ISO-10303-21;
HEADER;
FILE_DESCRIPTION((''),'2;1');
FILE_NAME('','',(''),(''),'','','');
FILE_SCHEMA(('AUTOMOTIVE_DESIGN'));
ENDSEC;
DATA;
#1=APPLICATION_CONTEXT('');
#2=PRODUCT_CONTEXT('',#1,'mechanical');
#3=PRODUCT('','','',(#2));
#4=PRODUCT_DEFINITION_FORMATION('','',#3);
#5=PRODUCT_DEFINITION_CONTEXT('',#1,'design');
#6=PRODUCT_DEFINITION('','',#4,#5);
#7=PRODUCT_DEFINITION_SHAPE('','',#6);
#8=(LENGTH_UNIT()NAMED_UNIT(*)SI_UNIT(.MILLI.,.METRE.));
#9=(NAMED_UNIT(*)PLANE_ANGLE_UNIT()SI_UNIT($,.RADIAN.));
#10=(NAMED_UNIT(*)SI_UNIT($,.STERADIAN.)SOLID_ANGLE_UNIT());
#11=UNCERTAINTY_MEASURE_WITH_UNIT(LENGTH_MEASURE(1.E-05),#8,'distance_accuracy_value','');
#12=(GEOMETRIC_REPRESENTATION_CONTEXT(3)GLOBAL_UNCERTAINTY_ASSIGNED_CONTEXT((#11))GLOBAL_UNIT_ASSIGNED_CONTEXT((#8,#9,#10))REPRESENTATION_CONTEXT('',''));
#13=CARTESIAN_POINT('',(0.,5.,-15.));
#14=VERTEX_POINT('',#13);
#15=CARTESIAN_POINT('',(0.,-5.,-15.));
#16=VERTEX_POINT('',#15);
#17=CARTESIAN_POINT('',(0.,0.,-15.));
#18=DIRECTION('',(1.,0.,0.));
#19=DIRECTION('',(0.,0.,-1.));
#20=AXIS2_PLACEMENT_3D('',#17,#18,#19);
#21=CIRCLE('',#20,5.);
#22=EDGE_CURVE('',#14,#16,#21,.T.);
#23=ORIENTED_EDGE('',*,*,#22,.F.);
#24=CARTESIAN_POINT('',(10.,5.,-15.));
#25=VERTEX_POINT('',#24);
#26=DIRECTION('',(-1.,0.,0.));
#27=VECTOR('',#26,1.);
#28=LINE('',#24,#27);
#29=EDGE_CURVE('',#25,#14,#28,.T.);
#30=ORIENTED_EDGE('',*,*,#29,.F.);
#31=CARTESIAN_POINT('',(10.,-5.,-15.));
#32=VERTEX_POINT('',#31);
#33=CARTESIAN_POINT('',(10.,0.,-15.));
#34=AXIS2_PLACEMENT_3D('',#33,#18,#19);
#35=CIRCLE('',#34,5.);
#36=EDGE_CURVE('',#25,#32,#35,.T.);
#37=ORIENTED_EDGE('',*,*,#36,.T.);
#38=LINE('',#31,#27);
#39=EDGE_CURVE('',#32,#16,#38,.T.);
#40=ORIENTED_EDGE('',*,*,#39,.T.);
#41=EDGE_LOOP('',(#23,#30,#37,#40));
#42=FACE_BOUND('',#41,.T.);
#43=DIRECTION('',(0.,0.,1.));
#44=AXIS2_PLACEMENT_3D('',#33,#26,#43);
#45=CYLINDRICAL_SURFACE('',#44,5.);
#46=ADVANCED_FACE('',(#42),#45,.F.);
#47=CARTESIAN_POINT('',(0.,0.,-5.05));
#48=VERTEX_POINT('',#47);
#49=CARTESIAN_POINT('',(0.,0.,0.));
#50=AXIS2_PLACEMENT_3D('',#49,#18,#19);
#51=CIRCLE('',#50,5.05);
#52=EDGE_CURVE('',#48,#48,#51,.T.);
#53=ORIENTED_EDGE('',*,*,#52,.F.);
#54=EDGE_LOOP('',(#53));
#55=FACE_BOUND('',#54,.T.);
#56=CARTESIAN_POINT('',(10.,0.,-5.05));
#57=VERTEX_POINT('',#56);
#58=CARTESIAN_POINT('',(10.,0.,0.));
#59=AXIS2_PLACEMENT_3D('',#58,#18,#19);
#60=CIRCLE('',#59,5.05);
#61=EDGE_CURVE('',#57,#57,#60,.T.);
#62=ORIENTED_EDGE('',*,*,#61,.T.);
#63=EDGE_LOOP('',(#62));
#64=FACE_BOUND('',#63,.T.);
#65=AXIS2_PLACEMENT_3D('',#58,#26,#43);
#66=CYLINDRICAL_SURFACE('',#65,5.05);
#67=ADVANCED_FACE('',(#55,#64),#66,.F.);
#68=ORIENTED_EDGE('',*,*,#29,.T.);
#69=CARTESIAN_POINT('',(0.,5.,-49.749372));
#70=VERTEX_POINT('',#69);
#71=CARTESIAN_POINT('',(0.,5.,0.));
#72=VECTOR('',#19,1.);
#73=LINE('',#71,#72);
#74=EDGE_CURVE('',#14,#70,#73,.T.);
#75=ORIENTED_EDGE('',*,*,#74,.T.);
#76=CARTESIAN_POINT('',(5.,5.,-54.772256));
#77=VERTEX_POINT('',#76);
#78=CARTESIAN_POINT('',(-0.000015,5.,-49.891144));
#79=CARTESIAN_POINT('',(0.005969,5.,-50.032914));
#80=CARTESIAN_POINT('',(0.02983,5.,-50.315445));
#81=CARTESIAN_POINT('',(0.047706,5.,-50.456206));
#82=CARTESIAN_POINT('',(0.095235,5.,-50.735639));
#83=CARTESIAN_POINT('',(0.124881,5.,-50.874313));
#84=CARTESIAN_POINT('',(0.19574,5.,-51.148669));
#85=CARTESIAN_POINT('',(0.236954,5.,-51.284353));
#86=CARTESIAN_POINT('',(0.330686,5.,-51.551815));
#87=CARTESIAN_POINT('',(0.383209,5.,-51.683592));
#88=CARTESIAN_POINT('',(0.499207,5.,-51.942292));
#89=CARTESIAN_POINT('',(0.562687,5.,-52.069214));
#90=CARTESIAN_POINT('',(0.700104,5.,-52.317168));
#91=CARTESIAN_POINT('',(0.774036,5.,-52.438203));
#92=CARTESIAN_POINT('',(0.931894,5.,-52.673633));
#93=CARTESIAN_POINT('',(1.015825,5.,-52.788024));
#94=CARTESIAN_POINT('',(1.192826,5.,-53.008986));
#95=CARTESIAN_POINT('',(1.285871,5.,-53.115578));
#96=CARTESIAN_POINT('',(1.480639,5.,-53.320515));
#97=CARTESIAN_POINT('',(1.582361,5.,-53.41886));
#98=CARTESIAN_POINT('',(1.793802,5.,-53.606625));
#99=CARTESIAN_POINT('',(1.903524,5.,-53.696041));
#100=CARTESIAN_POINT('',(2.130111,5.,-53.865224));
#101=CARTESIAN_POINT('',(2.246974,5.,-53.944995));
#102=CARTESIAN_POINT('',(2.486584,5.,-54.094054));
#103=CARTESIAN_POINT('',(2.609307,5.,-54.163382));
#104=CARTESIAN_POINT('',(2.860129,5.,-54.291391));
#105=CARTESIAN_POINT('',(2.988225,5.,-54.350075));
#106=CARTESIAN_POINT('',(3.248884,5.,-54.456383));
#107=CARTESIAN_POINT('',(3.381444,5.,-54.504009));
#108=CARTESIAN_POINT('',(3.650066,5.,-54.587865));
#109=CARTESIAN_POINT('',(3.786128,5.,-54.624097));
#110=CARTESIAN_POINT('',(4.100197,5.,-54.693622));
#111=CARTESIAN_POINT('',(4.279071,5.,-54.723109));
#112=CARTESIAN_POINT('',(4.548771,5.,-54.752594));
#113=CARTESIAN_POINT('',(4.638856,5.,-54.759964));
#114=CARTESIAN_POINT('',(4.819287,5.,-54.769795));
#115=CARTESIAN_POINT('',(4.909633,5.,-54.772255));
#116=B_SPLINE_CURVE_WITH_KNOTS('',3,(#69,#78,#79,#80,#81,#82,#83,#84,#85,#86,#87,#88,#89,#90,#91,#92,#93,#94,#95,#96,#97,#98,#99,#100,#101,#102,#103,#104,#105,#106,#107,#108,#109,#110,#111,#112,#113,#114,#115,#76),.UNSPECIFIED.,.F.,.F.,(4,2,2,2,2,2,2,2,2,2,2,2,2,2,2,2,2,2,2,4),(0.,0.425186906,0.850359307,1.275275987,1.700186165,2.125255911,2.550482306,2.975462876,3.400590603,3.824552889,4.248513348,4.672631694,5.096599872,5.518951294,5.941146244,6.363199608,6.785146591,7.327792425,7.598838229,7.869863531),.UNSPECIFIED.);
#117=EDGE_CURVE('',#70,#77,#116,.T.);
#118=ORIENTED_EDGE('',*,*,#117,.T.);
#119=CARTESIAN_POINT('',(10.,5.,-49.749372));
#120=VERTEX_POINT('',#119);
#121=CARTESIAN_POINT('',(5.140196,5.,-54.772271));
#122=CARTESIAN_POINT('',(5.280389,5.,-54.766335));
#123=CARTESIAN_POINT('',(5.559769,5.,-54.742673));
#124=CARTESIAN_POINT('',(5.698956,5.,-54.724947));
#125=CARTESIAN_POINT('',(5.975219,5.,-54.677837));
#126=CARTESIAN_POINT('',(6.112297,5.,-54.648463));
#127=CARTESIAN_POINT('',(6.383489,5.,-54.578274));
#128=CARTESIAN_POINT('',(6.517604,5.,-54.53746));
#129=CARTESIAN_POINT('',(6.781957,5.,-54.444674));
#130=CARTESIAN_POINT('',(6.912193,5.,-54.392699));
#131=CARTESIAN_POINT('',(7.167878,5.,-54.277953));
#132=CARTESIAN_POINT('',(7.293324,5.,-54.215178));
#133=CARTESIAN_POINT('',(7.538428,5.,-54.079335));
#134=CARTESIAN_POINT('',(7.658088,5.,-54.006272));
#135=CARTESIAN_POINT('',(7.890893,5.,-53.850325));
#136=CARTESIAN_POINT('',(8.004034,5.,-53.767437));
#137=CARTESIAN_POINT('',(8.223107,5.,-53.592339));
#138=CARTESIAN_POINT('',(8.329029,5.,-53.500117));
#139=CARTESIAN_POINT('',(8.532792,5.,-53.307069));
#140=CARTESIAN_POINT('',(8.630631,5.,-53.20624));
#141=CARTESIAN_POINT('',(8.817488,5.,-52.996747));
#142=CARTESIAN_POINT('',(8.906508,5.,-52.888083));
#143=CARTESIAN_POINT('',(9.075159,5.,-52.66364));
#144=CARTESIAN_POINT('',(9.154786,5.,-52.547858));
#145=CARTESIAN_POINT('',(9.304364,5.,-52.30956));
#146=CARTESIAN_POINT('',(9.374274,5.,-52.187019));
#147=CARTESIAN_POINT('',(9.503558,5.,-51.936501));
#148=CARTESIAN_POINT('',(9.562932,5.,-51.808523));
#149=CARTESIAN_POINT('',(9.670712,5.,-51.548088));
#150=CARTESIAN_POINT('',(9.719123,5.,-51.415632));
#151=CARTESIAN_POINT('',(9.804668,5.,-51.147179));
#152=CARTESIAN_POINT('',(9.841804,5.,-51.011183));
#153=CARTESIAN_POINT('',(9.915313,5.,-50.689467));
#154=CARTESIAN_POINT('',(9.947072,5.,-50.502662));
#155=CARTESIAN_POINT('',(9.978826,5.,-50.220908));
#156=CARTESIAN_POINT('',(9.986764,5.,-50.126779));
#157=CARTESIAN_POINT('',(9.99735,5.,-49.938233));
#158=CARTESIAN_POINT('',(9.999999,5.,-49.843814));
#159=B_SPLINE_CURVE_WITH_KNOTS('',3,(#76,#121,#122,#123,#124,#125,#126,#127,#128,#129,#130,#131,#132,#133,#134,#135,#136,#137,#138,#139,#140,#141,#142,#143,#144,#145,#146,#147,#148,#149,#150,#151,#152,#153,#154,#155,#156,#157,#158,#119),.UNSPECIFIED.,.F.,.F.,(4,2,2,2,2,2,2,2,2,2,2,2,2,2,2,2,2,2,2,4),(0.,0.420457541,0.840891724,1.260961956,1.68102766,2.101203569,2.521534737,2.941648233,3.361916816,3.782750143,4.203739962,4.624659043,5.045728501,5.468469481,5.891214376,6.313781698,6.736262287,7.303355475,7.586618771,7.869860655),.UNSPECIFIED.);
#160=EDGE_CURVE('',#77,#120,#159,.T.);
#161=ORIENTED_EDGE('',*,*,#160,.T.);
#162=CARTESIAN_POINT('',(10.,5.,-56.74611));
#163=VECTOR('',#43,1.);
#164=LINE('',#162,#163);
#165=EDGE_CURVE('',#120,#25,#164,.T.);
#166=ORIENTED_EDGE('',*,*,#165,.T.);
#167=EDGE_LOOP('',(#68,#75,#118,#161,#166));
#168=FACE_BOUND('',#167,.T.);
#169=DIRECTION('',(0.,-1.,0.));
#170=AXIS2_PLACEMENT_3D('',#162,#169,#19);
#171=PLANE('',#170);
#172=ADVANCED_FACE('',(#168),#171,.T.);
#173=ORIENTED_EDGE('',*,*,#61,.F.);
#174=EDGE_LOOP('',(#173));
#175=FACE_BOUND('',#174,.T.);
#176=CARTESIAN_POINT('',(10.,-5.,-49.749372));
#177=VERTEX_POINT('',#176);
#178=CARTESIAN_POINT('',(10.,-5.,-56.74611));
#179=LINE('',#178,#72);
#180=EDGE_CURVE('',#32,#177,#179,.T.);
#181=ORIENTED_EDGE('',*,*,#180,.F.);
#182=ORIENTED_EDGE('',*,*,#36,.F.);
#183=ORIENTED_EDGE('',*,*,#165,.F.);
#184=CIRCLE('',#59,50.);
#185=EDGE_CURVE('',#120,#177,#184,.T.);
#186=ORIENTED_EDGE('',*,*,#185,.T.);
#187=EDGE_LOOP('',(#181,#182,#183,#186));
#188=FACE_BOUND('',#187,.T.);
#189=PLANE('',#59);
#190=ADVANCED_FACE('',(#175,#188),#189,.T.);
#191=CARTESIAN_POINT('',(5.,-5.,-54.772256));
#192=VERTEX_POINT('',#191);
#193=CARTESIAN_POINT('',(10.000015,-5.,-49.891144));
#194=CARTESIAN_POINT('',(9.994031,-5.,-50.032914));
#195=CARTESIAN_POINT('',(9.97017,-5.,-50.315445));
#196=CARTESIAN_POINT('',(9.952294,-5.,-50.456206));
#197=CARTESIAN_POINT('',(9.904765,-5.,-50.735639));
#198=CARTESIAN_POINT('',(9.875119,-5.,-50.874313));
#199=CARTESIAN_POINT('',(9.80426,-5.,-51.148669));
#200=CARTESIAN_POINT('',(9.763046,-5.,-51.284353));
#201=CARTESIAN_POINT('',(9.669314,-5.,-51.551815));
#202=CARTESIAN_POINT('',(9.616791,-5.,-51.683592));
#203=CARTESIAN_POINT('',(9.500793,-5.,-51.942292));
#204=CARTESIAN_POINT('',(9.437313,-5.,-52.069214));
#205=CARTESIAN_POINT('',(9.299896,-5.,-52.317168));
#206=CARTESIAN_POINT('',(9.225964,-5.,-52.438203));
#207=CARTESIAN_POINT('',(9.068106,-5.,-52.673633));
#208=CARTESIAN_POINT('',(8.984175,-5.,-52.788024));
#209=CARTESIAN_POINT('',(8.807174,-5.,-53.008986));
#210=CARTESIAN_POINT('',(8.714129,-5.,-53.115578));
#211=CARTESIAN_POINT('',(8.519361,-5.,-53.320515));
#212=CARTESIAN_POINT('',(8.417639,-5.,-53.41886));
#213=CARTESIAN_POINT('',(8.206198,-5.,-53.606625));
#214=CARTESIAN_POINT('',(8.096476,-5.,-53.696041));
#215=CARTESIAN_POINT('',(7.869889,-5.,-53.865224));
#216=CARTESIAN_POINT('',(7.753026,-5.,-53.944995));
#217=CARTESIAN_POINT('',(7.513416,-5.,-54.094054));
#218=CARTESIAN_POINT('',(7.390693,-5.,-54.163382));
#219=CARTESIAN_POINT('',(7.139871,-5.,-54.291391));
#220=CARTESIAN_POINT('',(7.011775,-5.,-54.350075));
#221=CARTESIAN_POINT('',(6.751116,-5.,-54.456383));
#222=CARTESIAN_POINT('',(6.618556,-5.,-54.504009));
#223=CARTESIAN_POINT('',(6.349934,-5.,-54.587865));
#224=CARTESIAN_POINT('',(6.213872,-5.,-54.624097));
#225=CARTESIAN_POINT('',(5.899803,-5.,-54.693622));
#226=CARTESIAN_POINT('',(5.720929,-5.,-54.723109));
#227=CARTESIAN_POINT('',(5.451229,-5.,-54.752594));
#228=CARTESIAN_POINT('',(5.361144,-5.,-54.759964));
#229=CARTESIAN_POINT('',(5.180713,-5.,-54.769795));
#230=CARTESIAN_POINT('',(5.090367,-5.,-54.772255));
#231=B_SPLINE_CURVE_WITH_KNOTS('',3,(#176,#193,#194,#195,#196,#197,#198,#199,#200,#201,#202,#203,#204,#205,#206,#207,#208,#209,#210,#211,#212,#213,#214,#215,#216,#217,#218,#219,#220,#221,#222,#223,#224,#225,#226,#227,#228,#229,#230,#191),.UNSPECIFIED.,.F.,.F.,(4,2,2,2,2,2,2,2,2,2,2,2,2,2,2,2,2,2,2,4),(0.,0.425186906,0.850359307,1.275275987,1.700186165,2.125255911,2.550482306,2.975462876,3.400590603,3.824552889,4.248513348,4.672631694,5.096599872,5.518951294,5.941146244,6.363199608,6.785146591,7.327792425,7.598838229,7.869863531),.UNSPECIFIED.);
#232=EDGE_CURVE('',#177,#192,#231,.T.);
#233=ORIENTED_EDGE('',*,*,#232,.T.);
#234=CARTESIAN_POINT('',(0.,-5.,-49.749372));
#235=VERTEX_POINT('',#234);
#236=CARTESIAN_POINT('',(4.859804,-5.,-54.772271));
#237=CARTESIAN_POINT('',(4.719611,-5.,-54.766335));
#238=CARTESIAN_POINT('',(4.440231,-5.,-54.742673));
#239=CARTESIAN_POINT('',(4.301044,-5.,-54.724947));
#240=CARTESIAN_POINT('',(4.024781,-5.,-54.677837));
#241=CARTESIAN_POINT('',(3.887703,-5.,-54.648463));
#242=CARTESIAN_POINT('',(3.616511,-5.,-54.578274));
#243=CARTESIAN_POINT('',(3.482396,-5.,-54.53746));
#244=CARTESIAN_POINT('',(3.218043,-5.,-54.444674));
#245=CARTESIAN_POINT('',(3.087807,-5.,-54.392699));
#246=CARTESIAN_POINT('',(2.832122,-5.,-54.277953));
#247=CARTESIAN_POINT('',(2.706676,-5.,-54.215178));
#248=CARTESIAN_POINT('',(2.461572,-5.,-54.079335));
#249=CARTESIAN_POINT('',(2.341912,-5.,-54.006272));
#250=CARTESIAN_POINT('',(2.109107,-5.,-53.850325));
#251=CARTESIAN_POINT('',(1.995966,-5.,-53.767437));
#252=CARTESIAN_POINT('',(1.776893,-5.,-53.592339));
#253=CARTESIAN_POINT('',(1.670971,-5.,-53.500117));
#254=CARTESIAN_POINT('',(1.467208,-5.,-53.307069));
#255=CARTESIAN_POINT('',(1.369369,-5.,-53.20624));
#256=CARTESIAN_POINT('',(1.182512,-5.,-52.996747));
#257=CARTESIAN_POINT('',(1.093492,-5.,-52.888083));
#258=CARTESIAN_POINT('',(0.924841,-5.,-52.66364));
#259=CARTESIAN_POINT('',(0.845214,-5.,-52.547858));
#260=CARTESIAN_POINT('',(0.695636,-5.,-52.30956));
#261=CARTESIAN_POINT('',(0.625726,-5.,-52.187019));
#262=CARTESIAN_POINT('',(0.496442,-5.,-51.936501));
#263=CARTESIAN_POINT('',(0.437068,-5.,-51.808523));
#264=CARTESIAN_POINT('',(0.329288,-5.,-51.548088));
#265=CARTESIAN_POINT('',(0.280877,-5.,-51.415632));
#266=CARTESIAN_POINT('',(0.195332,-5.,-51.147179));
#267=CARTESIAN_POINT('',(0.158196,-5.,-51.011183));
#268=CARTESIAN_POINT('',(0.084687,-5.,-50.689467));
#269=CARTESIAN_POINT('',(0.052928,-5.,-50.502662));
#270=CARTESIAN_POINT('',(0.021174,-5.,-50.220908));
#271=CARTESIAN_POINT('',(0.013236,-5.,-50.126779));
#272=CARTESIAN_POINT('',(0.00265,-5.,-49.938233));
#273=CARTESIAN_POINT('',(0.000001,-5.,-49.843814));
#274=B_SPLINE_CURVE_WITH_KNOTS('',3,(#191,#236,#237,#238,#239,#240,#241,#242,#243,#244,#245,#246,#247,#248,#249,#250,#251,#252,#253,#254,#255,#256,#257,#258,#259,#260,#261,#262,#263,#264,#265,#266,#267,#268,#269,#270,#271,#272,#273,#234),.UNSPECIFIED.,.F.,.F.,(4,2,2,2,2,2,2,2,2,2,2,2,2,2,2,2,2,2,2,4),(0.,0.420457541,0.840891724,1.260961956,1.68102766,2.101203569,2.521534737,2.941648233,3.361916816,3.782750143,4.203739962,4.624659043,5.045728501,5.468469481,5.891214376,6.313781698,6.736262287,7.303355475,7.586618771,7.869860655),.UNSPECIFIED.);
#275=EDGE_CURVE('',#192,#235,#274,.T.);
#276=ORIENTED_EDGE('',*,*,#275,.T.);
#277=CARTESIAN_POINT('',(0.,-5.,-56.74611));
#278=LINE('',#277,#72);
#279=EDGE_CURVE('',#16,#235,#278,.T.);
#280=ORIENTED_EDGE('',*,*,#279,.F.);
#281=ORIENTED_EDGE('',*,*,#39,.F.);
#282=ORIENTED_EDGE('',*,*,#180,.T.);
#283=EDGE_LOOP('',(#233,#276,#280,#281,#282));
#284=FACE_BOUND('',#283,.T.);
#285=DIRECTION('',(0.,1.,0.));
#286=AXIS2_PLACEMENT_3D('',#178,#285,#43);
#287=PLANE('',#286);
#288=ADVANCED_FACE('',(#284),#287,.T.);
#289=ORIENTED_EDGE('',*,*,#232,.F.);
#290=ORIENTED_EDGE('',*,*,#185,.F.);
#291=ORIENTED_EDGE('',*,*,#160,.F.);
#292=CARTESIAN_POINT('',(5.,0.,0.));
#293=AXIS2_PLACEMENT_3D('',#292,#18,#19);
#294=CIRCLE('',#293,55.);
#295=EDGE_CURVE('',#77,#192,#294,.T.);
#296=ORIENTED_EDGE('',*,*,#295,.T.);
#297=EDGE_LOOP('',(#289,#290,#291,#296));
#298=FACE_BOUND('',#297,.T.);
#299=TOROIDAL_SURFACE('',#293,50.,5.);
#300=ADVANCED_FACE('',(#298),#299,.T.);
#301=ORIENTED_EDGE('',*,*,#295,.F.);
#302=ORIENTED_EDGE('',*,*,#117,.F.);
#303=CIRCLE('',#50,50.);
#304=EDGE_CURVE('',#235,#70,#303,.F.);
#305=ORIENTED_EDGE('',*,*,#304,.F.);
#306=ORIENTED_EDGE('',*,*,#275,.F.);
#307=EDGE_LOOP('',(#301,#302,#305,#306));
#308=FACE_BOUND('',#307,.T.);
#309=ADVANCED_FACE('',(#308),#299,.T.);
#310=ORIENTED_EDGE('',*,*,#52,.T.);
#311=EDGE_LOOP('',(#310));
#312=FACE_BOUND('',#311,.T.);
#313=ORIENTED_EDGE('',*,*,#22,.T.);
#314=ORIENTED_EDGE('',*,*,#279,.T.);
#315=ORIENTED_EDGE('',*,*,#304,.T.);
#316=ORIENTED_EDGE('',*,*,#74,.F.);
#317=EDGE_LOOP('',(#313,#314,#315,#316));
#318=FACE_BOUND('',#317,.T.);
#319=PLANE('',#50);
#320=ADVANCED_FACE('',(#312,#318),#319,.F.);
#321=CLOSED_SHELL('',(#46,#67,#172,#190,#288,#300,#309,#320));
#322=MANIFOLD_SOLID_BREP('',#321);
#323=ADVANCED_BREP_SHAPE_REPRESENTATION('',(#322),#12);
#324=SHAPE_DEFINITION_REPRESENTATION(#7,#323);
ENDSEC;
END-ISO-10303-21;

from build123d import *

# Parameters (mm, degrees)
SKETCH1_R           = 110
BOSS_EXTRUDE1_DEPTH = 20
CUT_EXTRUDE2_DEPTH  = 20
SKETCH2_R           = 10.1
CUT_EXTRUDE3_DEPTH  = 20
FILLET1_R           = 10
SCALE1_SCALE        = 0.5


with BuildPart() as part:
    # Sketch1 → Boss-Extrude1 (new body)
    with BuildSketch(Plane(origin=(0, 0, 0), x_dir=(0, 0, -1), z_dir=(1, 0, 0))):
        Circle(SKETCH1_R)
    extrude(amount=BOSS_EXTRUDE1_DEPTH)

    # Sketch3 → Cut-Extrude2 (cut)
    with BuildSketch(Plane(origin=(0, 0, 0), x_dir=(0, 0, -1), z_dir=(1, 0, 0))):
        with BuildLine():
            Line((113.492219185, -10), (30, -10))
            ThreePointArc((30, -10), (20, 0), (30, 10))
            Line((30, 10), (113.492219185, 10))
            ThreePointArc((113.492219185, 10), (123.492219185, 0), (113.492219185, -10))
        make_face()
    extrude(amount=CUT_EXTRUDE2_DEPTH, mode=Mode.SUBTRACT)

    # Sketch2 → Cut-Extrude3 (cut)
    with BuildSketch(Plane(origin=(0, 0, 0), x_dir=(0, 0, -1), z_dir=(1, 0, 0))):
        Circle(SKETCH2_R)
    extrude(amount=CUT_EXTRUDE3_DEPTH, mode=Mode.SUBTRACT)

    # Fillet1
    fillet1_edges = [part.edges().sort_by_distance(p)[0] for p in [
        (20, 0, 110),
        (0, 0, 110),
    ]]
    fillet(fillet1_edges, radius=FILLET1_R - 0.0001)  # a hair under: the kernel refuses the full size


with BuildPart() as part_1:
    # Scale1: scaled about (0, 0, 0)
    add(part.part.scale(SCALE1_SCALE))


solid = part_1.part
